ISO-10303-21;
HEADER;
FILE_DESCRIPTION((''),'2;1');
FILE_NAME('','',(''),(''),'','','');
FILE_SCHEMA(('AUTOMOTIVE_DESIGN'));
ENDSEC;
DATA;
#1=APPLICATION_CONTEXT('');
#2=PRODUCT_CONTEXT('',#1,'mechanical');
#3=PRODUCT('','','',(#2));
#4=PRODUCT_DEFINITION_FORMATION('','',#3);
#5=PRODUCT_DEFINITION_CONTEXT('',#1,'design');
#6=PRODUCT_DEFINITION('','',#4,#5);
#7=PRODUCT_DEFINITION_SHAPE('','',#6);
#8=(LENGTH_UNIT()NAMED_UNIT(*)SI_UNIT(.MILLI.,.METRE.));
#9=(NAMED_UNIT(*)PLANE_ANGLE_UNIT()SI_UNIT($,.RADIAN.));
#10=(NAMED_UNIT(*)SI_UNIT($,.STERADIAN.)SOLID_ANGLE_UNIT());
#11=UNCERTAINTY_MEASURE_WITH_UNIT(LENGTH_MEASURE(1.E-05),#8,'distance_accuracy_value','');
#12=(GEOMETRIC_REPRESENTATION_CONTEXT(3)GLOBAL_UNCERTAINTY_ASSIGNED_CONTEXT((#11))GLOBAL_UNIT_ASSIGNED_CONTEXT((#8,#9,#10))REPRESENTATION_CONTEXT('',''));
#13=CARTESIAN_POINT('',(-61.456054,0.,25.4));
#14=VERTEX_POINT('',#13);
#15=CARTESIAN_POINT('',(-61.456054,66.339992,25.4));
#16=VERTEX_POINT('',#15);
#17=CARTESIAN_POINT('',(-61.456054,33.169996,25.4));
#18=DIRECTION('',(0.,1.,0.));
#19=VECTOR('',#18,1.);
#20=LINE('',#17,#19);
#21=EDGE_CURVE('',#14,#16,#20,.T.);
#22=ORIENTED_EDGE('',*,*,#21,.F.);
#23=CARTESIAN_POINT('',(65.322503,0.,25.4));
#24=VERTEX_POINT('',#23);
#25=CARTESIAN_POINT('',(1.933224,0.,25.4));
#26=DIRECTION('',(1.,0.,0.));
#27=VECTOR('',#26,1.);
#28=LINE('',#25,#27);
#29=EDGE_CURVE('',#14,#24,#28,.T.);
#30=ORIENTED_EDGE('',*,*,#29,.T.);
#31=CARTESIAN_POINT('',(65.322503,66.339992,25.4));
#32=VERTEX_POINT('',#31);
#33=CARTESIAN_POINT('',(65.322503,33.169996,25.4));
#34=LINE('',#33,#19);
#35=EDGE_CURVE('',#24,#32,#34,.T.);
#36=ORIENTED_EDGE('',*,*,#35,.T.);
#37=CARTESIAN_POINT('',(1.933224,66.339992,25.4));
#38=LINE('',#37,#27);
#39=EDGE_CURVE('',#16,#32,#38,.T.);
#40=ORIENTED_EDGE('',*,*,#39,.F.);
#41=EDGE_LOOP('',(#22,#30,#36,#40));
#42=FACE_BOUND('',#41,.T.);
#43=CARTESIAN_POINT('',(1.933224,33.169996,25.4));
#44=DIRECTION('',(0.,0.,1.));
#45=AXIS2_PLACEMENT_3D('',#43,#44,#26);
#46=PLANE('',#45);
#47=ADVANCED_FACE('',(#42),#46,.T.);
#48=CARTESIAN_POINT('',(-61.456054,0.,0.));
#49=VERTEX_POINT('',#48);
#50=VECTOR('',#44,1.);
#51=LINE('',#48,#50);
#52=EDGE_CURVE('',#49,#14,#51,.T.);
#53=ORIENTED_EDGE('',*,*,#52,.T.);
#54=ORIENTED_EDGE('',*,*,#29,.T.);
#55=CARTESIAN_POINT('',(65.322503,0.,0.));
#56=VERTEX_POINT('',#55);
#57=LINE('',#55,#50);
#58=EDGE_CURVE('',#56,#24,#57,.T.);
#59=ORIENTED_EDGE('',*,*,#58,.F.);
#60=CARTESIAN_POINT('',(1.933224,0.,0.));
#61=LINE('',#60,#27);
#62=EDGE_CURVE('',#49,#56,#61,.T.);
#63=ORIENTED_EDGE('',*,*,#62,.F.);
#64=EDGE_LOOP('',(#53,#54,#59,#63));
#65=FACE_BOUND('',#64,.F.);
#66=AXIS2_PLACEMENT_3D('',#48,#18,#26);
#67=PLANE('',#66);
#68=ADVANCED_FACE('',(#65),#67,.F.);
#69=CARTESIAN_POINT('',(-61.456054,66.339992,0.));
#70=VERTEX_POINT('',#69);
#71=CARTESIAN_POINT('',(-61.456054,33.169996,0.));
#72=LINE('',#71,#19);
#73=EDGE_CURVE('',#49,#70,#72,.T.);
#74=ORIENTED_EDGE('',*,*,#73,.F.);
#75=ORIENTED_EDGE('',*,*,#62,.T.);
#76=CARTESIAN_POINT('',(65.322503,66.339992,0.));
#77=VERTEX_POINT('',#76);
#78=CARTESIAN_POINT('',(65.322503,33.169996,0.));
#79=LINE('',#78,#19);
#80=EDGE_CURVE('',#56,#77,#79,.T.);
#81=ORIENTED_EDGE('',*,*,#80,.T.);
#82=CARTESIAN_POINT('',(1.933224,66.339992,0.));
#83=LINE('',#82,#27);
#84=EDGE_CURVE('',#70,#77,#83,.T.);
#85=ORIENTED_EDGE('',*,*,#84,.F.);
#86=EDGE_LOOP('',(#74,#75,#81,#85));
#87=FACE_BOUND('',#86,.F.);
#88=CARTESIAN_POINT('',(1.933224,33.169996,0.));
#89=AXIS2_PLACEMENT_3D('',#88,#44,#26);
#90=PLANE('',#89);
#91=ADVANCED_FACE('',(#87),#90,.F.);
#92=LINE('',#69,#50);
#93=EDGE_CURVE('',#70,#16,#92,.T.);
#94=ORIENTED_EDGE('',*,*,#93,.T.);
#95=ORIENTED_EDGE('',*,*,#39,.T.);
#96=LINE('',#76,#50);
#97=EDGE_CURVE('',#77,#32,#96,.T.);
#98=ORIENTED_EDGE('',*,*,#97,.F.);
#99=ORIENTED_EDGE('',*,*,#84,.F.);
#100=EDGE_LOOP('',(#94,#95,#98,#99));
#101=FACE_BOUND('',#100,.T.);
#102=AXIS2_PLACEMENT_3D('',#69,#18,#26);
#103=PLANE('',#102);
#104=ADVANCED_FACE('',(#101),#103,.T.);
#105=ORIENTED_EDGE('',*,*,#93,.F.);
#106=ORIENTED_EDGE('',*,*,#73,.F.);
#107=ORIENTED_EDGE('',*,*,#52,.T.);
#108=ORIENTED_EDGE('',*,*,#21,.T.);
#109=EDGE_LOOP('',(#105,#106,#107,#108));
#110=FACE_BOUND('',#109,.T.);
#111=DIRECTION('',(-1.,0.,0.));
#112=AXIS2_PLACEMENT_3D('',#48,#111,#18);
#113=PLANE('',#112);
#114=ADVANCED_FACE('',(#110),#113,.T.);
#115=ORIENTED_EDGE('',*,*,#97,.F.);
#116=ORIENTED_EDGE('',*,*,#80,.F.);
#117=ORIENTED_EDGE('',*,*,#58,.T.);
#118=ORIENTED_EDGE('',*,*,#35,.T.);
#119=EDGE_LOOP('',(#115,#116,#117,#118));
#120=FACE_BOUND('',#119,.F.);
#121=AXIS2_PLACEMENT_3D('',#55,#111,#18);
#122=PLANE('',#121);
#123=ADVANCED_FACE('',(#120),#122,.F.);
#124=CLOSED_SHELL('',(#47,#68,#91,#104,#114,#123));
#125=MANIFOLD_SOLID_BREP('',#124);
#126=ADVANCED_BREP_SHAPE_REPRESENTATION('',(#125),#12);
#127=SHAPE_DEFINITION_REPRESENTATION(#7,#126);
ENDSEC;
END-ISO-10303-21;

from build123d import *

# Parameters (mm, degrees)
F0_W     = 126.7785578966
F0_H     = 66.3399919868
F1_DEPTH = 25.4
F2_DEPTH = 159


# Not quite as in the source:
# - an extrude ends at something that could not be found from the text; its depth is read off the source's solid


with BuildPart() as f1:
    # F0 (on Top) → F1 (new body)
    with BuildSketch(Plane.XY):
        with Locations((1.9332244992, 33.1699959934)):
            Rectangle(F0_W, F0_H)
    extrude(amount=F1_DEPTH)

    # F2 (cut, through all): a face of the model
    f2_faces = [f1.faces().sort_by_distance(p)[0] for p in [
        (1.9332244992, 33.1699959934, 25.4),
    ]]
    extrude(f2_faces, amount=F2_DEPTH, mode=Mode.SUBTRACT)


solid = f1.part
